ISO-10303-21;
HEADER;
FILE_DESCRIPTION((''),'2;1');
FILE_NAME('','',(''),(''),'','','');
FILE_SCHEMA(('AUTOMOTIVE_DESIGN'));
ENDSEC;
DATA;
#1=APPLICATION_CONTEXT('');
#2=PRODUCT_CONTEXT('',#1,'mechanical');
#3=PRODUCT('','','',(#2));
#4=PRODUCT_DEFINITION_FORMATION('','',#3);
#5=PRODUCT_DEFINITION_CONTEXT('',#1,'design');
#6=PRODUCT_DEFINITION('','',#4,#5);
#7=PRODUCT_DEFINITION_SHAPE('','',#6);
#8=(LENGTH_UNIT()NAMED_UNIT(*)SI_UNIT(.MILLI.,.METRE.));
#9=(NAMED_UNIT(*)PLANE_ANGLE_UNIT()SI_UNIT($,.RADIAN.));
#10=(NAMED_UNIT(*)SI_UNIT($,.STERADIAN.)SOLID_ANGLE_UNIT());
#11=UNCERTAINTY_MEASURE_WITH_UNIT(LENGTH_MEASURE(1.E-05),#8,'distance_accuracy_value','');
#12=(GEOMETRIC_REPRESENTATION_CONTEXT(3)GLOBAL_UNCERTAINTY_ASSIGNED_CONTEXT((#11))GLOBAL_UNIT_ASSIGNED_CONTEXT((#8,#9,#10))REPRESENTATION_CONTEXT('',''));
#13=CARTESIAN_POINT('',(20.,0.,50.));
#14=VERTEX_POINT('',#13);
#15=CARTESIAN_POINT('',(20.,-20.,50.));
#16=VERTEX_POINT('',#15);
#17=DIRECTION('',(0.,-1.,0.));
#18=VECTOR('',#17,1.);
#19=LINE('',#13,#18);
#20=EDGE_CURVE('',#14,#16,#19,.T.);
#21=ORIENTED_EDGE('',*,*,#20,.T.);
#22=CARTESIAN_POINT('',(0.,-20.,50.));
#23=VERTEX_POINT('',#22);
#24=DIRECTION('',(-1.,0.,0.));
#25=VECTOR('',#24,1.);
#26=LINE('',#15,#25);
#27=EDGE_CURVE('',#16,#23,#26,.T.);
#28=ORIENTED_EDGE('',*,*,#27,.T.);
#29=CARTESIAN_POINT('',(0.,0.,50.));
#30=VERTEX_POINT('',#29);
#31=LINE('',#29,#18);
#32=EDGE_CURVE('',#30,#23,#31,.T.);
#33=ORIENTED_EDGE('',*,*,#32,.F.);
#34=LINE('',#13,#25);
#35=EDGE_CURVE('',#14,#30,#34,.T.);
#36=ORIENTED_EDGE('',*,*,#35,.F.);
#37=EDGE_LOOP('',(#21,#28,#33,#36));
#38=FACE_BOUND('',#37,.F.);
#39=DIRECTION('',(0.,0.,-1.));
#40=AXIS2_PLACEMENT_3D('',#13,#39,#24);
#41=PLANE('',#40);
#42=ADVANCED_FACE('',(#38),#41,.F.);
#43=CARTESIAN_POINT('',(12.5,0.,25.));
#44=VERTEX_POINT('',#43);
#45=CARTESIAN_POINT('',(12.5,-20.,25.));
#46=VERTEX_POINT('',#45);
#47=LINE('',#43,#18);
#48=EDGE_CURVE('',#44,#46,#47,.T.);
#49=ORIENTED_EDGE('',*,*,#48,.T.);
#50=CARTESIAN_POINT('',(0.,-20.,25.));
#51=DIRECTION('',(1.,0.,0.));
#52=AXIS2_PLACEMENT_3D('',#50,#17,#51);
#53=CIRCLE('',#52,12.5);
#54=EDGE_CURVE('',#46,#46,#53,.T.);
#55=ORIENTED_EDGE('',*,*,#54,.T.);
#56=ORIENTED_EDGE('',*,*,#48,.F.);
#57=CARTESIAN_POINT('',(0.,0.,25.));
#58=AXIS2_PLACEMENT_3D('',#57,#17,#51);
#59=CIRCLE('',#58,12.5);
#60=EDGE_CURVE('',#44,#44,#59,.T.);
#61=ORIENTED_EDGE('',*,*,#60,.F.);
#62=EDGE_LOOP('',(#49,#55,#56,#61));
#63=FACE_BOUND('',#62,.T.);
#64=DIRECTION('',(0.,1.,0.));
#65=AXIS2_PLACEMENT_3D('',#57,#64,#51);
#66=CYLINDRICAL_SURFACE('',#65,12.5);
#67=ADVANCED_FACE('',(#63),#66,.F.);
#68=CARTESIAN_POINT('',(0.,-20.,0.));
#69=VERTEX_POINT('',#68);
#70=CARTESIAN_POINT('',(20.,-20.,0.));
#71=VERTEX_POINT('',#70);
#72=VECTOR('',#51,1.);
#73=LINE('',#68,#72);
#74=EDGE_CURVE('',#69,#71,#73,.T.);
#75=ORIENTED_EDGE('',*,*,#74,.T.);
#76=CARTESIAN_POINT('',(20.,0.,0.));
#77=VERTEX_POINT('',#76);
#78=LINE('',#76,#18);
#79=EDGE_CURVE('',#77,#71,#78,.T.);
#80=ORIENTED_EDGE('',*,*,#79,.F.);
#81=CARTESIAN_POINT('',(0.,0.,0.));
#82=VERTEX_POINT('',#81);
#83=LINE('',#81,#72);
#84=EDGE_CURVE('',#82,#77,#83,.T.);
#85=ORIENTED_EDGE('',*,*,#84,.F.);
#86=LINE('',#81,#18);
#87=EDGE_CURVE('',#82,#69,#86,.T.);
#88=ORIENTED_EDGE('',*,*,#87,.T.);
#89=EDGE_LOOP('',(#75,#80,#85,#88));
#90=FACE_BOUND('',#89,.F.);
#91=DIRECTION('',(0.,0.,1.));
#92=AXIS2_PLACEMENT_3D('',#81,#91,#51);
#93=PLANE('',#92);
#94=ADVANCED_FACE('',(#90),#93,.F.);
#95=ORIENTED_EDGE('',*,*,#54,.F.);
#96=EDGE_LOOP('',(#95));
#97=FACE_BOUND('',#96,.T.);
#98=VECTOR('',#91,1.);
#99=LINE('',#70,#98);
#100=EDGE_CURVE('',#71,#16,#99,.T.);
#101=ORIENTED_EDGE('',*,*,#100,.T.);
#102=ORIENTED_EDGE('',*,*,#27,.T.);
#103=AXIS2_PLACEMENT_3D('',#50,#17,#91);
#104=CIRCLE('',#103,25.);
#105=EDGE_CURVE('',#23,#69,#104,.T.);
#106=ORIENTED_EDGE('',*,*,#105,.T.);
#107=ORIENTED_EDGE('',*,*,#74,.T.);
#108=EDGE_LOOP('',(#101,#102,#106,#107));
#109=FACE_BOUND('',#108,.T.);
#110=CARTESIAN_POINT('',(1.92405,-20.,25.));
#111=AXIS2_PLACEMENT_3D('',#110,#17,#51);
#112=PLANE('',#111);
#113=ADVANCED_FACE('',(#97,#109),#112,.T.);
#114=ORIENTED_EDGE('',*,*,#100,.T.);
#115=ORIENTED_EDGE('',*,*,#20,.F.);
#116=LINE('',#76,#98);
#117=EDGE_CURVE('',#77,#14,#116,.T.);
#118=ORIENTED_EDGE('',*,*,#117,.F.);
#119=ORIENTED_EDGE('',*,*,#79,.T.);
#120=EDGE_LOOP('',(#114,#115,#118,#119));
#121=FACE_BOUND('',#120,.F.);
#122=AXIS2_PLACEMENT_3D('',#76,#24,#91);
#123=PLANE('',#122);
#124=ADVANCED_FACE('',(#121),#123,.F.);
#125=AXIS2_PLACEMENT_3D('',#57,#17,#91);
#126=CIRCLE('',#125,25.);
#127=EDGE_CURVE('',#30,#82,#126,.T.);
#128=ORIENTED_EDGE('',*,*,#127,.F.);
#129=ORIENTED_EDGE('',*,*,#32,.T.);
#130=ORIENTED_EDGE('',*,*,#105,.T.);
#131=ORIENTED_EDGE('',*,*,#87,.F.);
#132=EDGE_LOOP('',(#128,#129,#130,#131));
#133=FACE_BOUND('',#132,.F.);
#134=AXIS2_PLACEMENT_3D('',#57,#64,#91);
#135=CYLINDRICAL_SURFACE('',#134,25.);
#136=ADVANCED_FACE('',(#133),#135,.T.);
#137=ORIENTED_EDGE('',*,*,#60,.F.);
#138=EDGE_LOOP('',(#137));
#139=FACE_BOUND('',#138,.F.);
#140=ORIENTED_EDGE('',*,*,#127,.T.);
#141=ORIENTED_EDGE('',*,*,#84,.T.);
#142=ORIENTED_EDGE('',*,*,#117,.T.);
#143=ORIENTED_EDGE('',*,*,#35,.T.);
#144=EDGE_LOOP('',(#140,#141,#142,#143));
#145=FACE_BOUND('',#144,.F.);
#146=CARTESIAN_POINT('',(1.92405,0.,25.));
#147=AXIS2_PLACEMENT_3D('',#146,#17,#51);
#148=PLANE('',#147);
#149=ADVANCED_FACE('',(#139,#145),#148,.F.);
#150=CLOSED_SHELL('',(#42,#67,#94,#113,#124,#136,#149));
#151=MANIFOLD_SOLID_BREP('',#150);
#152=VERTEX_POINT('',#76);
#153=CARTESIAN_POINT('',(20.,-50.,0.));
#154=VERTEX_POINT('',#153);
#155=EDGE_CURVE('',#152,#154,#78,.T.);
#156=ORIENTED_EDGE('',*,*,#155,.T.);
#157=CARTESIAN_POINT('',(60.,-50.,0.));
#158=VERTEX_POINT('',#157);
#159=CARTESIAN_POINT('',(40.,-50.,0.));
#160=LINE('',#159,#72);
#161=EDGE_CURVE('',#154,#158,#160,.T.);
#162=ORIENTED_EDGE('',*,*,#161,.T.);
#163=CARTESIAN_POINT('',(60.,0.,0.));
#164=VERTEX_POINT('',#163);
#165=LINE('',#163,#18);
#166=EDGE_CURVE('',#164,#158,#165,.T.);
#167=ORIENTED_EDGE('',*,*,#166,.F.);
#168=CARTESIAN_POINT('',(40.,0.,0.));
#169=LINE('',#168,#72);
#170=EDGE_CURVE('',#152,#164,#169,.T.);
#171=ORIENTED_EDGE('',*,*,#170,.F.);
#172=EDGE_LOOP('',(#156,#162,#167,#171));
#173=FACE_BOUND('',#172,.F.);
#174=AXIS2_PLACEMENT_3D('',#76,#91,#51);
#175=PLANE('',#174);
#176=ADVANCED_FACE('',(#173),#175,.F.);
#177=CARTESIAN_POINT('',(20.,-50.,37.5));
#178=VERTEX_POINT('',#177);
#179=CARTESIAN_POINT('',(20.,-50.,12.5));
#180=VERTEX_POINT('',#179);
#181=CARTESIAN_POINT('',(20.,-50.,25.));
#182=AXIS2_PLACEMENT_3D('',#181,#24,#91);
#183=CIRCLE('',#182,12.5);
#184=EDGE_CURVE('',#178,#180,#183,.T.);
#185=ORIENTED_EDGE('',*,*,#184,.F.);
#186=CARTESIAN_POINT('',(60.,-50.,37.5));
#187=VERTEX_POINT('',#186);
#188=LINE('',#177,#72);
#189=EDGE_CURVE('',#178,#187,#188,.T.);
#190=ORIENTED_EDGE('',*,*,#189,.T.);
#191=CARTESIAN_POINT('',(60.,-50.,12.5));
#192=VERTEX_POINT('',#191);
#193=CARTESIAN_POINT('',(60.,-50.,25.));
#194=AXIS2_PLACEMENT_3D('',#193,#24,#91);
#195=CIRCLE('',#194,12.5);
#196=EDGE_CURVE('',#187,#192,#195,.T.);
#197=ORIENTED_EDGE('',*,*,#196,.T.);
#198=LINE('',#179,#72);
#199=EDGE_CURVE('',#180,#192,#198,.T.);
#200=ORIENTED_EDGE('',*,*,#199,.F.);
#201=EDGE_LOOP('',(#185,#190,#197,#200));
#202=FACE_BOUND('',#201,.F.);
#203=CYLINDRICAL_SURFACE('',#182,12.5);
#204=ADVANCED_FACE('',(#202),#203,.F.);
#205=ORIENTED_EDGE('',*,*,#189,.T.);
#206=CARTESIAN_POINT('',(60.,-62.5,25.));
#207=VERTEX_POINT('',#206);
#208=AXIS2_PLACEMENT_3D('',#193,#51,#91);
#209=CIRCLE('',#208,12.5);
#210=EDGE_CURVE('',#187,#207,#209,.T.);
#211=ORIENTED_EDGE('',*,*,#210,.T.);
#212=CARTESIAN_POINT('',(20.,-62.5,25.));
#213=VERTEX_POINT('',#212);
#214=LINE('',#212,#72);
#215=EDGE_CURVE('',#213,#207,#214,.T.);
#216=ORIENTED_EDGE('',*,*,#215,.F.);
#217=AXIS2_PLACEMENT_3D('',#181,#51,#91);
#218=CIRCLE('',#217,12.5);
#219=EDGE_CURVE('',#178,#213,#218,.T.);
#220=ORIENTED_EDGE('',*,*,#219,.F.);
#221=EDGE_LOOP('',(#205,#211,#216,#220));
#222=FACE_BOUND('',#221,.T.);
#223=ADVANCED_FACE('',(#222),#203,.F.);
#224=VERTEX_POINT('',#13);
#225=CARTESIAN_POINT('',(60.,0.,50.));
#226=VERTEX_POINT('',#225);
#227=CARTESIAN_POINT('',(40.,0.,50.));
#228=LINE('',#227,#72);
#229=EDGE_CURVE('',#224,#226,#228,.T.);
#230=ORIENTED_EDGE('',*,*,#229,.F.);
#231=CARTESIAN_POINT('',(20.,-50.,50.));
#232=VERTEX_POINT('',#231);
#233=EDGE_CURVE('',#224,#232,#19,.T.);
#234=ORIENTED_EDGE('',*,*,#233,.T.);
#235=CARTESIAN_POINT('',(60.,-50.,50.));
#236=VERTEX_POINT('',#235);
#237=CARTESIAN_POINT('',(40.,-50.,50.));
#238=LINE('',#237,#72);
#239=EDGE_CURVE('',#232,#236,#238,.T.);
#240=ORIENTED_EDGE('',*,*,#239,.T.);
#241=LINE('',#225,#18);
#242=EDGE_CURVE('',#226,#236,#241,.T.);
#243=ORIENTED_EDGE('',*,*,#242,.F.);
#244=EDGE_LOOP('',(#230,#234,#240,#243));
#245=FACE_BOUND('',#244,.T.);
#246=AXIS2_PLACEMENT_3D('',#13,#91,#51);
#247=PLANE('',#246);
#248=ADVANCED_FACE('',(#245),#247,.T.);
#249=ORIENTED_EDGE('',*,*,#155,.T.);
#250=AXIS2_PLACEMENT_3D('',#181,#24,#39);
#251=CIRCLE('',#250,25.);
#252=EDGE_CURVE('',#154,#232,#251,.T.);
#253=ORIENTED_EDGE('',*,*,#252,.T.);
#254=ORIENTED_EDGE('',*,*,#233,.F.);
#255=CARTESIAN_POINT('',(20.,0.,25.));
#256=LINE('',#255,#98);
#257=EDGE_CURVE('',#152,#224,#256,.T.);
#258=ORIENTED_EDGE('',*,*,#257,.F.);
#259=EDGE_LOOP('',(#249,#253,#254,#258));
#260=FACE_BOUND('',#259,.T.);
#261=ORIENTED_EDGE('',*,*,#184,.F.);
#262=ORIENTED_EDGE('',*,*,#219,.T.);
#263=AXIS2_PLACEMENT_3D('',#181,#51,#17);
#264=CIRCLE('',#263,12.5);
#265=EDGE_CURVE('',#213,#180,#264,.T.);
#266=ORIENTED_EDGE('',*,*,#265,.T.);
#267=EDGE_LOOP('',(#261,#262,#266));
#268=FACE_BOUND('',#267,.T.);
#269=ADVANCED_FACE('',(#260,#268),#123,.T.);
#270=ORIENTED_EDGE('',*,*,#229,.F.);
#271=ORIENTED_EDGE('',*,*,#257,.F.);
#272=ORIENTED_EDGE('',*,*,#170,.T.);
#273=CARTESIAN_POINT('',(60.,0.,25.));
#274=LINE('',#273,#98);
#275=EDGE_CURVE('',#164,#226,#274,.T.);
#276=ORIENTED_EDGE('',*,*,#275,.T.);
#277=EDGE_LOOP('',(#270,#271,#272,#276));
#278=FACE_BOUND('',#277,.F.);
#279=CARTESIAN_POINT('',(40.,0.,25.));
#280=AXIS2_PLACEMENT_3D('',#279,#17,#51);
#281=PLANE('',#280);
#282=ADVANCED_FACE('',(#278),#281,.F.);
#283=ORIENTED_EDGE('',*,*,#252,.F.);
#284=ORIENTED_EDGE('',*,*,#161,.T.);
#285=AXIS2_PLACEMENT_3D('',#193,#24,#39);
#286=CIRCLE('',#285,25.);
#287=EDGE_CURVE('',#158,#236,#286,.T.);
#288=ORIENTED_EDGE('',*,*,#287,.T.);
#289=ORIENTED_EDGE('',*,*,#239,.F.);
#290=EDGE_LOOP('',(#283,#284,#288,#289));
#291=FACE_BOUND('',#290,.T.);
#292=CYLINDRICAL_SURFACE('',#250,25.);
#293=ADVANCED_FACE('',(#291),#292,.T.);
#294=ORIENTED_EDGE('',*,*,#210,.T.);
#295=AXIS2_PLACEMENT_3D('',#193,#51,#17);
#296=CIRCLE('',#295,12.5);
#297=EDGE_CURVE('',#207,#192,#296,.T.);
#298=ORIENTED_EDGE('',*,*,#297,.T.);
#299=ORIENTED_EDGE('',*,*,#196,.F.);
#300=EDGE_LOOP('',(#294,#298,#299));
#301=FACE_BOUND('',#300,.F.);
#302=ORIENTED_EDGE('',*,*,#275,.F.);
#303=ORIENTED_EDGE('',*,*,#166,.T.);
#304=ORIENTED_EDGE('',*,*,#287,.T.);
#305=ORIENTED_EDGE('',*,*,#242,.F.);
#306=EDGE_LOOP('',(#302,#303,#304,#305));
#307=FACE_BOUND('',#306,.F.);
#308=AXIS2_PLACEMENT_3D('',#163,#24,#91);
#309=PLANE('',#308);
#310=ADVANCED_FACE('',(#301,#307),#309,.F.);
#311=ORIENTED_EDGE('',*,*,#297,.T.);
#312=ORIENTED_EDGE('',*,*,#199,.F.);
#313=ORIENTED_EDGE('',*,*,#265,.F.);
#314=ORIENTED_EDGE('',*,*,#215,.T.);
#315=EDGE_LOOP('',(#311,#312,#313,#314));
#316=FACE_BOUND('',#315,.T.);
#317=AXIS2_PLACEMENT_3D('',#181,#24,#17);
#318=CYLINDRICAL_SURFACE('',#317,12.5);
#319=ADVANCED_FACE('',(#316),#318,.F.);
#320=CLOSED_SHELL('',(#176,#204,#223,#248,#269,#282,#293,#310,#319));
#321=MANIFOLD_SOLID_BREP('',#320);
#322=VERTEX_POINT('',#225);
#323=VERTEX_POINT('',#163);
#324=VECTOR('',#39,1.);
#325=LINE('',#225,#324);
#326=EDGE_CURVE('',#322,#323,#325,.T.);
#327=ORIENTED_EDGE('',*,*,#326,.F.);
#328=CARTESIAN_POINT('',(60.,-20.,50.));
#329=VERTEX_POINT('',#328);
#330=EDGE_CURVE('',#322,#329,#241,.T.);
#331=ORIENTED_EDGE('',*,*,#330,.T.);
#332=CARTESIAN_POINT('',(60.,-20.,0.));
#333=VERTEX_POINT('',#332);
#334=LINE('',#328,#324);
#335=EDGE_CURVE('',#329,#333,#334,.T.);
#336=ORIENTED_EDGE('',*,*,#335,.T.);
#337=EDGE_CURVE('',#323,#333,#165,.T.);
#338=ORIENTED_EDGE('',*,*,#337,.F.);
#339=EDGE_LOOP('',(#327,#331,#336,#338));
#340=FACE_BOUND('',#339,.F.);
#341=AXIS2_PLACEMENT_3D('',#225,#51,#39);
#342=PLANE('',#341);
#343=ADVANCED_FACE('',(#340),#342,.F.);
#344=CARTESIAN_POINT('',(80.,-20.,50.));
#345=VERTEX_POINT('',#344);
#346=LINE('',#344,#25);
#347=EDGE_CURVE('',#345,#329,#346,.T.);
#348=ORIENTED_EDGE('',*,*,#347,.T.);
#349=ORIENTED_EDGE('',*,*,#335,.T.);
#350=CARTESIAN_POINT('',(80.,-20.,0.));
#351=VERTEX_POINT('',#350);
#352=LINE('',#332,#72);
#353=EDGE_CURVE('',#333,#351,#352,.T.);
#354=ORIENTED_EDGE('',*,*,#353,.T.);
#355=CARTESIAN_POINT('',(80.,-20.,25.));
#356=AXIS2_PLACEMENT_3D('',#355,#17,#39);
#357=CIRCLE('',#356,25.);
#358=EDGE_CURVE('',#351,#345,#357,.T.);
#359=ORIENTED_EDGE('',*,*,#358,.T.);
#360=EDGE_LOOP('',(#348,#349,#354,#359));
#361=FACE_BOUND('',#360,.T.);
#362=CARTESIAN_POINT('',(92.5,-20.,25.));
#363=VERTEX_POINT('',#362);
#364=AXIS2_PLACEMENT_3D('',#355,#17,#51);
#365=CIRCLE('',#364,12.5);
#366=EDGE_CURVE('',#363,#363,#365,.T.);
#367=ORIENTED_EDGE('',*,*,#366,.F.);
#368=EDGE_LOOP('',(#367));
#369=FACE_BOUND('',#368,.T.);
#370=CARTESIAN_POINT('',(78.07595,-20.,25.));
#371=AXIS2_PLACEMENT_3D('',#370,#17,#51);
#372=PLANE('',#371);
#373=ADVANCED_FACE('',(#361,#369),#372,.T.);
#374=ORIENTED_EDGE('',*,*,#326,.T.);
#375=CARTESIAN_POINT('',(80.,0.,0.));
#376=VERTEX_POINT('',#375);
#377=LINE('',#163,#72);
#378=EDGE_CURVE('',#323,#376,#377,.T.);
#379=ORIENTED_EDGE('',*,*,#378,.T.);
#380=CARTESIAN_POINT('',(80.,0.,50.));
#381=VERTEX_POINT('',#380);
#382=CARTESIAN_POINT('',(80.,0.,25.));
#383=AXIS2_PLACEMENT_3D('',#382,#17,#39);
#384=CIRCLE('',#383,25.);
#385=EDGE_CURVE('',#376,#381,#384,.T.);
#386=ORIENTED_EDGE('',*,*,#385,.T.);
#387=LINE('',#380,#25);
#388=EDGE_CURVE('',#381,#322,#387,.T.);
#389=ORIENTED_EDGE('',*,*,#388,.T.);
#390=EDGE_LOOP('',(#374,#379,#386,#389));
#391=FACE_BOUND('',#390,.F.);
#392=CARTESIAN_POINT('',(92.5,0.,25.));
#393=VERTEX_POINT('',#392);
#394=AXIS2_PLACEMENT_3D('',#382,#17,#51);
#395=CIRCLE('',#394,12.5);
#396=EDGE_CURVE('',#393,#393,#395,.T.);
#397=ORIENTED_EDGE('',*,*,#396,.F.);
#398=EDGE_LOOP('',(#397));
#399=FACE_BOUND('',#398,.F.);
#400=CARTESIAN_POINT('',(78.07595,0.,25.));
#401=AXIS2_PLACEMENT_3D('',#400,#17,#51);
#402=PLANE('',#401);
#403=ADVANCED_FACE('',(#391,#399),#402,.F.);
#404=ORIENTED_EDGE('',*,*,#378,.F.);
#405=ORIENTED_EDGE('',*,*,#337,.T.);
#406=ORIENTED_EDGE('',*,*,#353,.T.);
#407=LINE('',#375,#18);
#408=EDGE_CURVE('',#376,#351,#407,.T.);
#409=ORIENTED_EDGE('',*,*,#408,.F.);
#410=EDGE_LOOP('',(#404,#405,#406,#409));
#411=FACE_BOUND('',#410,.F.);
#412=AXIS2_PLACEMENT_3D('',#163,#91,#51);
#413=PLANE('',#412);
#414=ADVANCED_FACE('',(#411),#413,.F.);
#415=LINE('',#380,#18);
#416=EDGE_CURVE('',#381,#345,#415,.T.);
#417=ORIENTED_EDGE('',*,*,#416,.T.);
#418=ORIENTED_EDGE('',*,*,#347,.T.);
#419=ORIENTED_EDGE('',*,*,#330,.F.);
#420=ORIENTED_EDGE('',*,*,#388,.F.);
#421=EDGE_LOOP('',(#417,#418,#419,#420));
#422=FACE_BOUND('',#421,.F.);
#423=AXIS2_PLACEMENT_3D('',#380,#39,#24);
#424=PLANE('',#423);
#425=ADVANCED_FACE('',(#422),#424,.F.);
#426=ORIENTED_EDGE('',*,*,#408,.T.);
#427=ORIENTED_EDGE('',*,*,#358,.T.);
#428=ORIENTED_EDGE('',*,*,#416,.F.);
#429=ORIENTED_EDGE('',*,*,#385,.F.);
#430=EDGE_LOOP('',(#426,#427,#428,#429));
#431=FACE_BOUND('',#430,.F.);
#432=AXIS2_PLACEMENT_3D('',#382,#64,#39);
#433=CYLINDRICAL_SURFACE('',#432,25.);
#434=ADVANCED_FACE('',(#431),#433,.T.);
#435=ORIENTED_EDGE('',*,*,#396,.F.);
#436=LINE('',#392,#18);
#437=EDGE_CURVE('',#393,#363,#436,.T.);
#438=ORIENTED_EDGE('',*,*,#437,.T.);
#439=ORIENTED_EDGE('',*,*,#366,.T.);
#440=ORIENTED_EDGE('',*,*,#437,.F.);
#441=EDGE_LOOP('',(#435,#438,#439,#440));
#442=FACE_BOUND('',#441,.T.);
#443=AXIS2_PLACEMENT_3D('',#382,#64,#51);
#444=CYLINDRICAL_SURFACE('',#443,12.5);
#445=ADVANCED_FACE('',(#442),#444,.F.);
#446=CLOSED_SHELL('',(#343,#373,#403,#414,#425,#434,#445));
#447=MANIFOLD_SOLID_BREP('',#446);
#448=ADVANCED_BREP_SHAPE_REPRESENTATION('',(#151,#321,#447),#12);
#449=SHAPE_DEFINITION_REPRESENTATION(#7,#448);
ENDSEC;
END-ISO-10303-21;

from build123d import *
from build123d import SkipClean  # not in build123d's __all__

# Parameters (mm, degrees)
F0_R     = 12.5
F1_DEPTH = 20
F0_W     = 40
F0_H     = 50
F2_DEPTH = 50
F4_DEPTH = 40
F5_DEPTH = 85.001


with BuildPart() as f1:
    # F0 (on Front) → F1 (new body)
    with BuildSketch(Plane.XZ):
        with BuildLine():
            Line((20, 50), (0, 50))
            ThreePointArc((0, 50), (-25, 25), (0, 0))
            Line((0, 0), (20, 0))
            Line((20, 0), (20, 50))
        make_face()
        with Locations((0, 25)):
            Circle(F0_R, mode=Mode.SUBTRACT)
    extrude(amount=F1_DEPTH)


with BuildPart() as f1b:
    # F0 (on Front) → F1, piece 2 (new body)
    with BuildSketch(Plane.XZ):
        with BuildLine():
            Line((80, 50), (60, 50))
            Line((60, 50), (60, 0))
            Line((60, 0), (80, 0))
            ThreePointArc((80, 0), (105, 25), (80, 50))
        make_face()
        with Locations((80, 25)):
            Circle(F0_R, mode=Mode.SUBTRACT)
    extrude(amount=F1_DEPTH)


with BuildPart() as f2:
    # F0 (on Front) → F2 (new body)
    with BuildSketch(Plane.XZ):
        with Locations((40, 25)):
            Rectangle(F0_W, F0_H)
    extrude(amount=F2_DEPTH)

    # F3 (on face) → F4 (join, through all)
    with BuildSketch(Plane(origin=(20, 0, 0), x_dir=(0, -1, 0), z_dir=(-1, 0, 0))):
        with BuildLine():
            ThreePointArc((50, 37.5), (37.5, 25), (50, 12.5))
            Line((50, 12.5), (50, 37.5))
        make_face()
        with BuildLine():
            Line((50, 12.5), (50, 0))
            ThreePointArc((50, 0), (75, 25), (50, 50))
            Line((50, 50), (50, 37.5))
            ThreePointArc((50, 37.5), (58.8388347648, 33.8388347648), (62.5, 25))
            ThreePointArc((62.5, 25), (58.8388347648, 16.1611652352), (50, 12.5))
        make_face()
    extrude(amount=-F4_DEPTH)

    # F3 (on face) → F5 (cut, through all)
    with BuildSketch(Plane(origin=(20, 0, 0), x_dir=(0, -1, 0), z_dir=(-1, 0, 0))):
        with BuildLine():
            ThreePointArc((50, 37.5), (37.5, 25), (50, 12.5))
            Line((50, 12.5), (50, 37.5))
        make_face()
    with SkipClean():  # cleaning this boolean's faces spoils the solid; the shape is the same uncleaned
        extrude(amount=-F5_DEPTH, mode=Mode.SUBTRACT)


solid = Compound([f1.part, f1b.part, f2.part])
